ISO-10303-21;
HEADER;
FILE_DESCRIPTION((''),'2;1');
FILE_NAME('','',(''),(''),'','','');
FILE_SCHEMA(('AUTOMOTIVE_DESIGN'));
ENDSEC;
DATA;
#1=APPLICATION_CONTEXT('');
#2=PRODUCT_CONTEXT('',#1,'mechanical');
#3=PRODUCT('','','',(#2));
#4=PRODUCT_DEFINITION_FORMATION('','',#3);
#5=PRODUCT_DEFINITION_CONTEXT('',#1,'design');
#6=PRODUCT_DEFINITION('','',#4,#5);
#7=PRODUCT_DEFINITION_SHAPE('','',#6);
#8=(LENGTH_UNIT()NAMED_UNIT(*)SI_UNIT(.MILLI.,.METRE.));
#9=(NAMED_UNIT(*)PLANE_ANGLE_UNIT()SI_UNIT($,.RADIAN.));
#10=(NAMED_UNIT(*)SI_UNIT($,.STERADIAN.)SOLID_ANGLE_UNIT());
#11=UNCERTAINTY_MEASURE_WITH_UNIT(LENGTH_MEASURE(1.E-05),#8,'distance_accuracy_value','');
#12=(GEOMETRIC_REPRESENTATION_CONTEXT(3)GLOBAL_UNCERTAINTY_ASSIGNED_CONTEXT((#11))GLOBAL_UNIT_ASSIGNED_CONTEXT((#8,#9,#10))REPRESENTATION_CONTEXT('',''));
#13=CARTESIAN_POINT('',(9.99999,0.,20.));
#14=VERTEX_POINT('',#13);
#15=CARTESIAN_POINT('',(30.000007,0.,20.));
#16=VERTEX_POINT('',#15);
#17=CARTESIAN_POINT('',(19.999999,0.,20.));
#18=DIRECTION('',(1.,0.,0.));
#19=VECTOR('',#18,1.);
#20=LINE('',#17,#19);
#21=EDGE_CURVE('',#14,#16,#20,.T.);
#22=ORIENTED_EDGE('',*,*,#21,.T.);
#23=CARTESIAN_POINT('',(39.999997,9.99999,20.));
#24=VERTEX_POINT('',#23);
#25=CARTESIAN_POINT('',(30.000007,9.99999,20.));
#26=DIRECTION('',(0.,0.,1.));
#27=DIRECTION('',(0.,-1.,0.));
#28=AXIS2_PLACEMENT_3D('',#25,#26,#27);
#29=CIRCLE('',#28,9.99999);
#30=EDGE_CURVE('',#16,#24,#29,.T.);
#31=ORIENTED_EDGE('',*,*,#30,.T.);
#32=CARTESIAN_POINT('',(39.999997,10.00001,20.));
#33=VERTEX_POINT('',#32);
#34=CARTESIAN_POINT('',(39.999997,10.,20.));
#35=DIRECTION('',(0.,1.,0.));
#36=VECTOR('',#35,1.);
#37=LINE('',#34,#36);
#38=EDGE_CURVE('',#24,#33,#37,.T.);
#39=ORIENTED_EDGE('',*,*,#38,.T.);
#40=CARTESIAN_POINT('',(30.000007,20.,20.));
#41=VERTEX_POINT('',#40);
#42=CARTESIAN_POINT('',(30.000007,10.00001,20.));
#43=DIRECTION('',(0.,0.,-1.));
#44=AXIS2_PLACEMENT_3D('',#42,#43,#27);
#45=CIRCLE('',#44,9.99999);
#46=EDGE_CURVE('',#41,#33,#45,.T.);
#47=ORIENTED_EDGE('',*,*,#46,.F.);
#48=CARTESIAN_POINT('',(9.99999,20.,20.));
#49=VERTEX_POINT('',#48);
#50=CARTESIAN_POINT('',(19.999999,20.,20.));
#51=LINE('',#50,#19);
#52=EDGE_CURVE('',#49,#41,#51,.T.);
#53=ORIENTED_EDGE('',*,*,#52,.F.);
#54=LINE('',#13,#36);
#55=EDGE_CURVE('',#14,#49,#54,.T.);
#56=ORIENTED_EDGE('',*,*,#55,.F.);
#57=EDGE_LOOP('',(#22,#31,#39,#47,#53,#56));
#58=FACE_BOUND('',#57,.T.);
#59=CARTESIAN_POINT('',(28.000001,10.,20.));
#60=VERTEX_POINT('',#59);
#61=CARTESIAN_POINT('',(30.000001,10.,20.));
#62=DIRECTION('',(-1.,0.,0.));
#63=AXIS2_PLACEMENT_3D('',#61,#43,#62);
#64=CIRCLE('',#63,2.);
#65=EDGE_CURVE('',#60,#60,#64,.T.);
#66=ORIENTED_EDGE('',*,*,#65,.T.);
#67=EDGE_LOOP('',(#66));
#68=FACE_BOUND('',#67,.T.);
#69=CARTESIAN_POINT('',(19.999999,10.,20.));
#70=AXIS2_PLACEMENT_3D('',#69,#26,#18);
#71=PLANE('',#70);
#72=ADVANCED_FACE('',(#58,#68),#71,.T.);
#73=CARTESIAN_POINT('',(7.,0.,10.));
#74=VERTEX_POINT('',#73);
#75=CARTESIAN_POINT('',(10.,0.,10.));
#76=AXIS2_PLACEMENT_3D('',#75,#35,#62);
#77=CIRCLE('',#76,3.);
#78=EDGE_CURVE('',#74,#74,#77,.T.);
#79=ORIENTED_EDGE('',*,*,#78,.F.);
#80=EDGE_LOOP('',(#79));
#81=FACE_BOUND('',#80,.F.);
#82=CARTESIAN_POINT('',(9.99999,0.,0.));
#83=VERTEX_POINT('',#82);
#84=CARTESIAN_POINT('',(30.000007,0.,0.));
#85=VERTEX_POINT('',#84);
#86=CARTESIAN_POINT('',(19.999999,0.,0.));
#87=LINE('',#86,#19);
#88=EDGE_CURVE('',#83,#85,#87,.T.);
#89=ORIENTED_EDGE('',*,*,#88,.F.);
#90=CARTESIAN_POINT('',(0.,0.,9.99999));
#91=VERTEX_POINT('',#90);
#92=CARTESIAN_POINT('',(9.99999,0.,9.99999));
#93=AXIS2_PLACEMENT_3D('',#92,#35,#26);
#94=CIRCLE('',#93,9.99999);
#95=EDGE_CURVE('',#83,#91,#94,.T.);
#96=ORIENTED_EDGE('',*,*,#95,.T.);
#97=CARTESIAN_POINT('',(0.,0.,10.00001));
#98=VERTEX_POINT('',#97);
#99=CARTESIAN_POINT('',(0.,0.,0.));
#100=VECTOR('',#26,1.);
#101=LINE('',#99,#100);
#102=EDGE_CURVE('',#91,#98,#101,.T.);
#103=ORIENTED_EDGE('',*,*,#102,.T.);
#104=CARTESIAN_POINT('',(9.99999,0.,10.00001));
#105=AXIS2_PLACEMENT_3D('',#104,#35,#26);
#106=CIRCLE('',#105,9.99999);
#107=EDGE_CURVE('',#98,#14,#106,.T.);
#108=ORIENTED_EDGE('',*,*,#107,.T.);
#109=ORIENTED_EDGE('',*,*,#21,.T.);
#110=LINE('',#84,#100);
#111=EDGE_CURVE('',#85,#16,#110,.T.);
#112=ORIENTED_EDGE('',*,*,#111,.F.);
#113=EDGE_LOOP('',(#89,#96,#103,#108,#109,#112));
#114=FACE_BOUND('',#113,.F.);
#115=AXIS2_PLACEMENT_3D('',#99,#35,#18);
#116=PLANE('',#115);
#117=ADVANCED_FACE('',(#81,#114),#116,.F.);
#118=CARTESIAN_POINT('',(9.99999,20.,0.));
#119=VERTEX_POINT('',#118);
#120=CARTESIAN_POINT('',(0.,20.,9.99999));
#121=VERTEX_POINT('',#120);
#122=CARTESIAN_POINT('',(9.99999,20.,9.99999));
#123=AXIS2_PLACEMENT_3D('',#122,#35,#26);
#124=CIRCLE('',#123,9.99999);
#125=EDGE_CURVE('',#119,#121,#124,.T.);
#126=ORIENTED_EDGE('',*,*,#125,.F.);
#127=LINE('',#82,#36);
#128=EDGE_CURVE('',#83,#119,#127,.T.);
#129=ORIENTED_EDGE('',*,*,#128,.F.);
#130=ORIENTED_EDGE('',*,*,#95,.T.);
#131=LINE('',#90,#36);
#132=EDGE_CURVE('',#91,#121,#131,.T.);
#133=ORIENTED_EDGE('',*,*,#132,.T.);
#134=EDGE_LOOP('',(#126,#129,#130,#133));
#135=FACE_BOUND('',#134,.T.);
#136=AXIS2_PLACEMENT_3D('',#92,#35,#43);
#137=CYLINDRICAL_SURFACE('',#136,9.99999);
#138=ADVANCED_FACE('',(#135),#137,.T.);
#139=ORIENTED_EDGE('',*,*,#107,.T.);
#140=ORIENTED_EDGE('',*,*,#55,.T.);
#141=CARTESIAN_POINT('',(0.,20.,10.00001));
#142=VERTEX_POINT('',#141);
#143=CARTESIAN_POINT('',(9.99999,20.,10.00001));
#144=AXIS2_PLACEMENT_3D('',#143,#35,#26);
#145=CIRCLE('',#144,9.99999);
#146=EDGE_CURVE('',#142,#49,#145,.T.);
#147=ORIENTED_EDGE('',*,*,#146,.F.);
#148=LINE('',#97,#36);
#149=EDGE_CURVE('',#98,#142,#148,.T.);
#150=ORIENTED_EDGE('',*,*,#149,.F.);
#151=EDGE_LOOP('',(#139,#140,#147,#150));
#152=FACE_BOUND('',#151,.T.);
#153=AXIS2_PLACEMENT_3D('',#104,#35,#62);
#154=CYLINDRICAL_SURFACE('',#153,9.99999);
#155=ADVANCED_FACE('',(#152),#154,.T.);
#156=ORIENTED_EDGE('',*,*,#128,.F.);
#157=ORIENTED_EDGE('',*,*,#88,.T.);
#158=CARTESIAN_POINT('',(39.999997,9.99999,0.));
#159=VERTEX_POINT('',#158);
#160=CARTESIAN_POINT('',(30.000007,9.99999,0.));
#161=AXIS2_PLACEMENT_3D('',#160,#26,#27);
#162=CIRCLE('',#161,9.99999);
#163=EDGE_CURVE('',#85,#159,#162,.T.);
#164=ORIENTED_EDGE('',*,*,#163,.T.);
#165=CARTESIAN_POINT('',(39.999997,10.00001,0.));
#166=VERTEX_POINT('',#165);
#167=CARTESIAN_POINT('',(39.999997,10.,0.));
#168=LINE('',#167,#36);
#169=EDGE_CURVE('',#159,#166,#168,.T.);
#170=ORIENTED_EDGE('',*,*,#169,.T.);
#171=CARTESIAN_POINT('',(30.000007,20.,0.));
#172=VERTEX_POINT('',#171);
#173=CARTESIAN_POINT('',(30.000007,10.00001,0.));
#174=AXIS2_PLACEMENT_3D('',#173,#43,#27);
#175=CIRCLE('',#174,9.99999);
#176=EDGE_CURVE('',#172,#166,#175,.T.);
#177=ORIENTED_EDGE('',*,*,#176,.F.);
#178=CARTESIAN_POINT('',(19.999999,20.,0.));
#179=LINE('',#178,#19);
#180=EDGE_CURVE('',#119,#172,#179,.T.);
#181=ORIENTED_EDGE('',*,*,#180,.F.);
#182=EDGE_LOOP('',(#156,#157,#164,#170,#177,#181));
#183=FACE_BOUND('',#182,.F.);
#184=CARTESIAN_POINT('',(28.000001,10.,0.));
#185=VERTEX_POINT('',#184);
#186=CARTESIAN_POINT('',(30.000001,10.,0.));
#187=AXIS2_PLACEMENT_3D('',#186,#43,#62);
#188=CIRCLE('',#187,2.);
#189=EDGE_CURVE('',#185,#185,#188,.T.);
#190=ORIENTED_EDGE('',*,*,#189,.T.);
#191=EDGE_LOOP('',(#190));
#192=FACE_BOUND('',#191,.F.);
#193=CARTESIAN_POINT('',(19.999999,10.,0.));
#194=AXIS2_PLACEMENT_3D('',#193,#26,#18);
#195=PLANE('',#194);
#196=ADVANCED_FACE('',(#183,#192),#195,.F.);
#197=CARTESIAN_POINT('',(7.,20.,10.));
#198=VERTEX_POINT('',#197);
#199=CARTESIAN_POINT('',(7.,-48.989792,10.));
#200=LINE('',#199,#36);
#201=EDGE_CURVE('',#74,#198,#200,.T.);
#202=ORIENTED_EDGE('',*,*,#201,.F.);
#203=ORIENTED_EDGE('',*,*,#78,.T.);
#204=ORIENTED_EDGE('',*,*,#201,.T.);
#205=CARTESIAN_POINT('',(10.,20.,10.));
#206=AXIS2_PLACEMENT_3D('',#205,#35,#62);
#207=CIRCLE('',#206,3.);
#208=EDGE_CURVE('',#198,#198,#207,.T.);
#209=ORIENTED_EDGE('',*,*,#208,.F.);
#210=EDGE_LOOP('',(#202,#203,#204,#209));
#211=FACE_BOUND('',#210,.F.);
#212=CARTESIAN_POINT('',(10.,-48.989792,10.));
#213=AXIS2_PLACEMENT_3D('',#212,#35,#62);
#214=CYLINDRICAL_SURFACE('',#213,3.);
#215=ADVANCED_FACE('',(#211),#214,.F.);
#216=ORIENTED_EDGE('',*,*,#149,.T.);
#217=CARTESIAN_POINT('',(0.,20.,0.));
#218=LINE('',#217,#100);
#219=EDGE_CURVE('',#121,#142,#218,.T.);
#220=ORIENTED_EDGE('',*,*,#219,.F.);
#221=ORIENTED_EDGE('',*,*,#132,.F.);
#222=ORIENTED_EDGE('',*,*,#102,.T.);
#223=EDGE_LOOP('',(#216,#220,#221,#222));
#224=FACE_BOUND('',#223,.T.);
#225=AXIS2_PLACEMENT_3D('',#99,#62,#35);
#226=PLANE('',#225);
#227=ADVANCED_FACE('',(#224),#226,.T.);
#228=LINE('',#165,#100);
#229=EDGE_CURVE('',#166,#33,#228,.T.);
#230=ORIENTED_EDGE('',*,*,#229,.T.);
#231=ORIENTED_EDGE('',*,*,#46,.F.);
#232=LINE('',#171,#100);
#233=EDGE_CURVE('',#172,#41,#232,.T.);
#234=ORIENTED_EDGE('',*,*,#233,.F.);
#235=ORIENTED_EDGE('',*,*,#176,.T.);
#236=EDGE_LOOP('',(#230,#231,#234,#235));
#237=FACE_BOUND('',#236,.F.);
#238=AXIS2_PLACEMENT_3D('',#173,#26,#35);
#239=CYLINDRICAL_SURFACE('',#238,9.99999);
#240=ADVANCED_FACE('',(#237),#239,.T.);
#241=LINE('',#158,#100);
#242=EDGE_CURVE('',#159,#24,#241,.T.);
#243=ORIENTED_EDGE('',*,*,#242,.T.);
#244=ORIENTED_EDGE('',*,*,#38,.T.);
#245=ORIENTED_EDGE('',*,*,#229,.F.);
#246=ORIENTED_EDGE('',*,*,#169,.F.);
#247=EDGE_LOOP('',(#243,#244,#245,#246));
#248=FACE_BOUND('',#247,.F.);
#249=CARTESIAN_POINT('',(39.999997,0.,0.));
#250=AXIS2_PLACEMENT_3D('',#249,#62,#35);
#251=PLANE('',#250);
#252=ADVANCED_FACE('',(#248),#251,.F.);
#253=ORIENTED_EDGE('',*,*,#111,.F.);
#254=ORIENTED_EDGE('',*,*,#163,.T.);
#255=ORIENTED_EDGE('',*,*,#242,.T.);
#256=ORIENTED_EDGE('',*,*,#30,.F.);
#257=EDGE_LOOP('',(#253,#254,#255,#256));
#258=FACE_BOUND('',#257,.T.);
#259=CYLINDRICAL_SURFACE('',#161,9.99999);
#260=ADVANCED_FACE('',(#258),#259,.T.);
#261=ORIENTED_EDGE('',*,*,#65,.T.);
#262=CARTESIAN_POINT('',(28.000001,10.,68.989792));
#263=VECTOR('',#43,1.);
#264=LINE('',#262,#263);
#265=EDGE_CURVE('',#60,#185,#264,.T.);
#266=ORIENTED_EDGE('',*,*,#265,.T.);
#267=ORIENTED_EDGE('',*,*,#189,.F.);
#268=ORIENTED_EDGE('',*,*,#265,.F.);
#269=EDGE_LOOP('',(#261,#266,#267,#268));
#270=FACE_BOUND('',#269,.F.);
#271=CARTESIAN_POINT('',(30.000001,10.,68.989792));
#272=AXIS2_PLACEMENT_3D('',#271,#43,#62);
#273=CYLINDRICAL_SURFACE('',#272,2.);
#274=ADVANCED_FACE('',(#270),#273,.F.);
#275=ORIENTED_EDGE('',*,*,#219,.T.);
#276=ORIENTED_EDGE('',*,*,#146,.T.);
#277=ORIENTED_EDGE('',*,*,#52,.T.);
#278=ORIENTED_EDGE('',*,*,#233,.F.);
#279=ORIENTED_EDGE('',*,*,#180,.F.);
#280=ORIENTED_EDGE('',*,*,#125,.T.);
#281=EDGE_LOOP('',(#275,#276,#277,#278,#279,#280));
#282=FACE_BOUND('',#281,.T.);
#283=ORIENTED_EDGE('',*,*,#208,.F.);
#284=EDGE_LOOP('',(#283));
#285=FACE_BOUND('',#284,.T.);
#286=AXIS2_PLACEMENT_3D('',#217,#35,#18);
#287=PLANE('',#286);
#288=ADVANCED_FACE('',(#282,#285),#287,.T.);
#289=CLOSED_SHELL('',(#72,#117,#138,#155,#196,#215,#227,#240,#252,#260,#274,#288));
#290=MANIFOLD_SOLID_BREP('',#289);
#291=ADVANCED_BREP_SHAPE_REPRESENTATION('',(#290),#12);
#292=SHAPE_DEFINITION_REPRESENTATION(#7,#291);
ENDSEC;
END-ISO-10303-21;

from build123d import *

# Parameters (mm, degrees)
F0_W     = 39.9999970493
F0_H     = 20
F1_DEPTH = 20
F3_D     = 4
F5_D     = 6
F6_R     = 9.99999
F7_R     = 9.99999


# Not quite as in the source:
# - a fillet or chamfer is up to 0.001 mm smaller than in the source, because OpenCascade refuses the exact size


with BuildPart() as f1:
    # F0 (on Top) → F1 (new body)
    with BuildSketch(Plane.XY):
        with Locations((19.9999985246, 10)):
            Rectangle(F0_W, F0_H)
    extrude(amount=F1_DEPTH)

    # F3 (through all)
    with Locations(Plane.XY.offset(20)):
        with Locations((30.0000011921, 10)):
            Hole(F3_D / 2)

    # F5 (through all)
    with Locations(Plane.XZ):
        with Locations((10, 10)):
            Hole(F5_D / 2)

    # F6 (radius 10 in the source; OpenCascade refuses exactly that, so slightly less here)
    f6_edges = [f1.edges().sort_by_distance(p)[0] for p in [
        (39.999997, 0, 10),
        (39.999997, 20, 10),
    ]]
    fillet(f6_edges, radius=F6_R)

    # F7 (radius 10 in the source; OpenCascade refuses exactly that, so slightly less here)
    f7_edges = [f1.edges().sort_by_distance(p)[0] for p in [
        (0, 10, 0),
        (0, 10, 20),
    ]]
    fillet(f7_edges, radius=F7_R)


solid = f1.part
